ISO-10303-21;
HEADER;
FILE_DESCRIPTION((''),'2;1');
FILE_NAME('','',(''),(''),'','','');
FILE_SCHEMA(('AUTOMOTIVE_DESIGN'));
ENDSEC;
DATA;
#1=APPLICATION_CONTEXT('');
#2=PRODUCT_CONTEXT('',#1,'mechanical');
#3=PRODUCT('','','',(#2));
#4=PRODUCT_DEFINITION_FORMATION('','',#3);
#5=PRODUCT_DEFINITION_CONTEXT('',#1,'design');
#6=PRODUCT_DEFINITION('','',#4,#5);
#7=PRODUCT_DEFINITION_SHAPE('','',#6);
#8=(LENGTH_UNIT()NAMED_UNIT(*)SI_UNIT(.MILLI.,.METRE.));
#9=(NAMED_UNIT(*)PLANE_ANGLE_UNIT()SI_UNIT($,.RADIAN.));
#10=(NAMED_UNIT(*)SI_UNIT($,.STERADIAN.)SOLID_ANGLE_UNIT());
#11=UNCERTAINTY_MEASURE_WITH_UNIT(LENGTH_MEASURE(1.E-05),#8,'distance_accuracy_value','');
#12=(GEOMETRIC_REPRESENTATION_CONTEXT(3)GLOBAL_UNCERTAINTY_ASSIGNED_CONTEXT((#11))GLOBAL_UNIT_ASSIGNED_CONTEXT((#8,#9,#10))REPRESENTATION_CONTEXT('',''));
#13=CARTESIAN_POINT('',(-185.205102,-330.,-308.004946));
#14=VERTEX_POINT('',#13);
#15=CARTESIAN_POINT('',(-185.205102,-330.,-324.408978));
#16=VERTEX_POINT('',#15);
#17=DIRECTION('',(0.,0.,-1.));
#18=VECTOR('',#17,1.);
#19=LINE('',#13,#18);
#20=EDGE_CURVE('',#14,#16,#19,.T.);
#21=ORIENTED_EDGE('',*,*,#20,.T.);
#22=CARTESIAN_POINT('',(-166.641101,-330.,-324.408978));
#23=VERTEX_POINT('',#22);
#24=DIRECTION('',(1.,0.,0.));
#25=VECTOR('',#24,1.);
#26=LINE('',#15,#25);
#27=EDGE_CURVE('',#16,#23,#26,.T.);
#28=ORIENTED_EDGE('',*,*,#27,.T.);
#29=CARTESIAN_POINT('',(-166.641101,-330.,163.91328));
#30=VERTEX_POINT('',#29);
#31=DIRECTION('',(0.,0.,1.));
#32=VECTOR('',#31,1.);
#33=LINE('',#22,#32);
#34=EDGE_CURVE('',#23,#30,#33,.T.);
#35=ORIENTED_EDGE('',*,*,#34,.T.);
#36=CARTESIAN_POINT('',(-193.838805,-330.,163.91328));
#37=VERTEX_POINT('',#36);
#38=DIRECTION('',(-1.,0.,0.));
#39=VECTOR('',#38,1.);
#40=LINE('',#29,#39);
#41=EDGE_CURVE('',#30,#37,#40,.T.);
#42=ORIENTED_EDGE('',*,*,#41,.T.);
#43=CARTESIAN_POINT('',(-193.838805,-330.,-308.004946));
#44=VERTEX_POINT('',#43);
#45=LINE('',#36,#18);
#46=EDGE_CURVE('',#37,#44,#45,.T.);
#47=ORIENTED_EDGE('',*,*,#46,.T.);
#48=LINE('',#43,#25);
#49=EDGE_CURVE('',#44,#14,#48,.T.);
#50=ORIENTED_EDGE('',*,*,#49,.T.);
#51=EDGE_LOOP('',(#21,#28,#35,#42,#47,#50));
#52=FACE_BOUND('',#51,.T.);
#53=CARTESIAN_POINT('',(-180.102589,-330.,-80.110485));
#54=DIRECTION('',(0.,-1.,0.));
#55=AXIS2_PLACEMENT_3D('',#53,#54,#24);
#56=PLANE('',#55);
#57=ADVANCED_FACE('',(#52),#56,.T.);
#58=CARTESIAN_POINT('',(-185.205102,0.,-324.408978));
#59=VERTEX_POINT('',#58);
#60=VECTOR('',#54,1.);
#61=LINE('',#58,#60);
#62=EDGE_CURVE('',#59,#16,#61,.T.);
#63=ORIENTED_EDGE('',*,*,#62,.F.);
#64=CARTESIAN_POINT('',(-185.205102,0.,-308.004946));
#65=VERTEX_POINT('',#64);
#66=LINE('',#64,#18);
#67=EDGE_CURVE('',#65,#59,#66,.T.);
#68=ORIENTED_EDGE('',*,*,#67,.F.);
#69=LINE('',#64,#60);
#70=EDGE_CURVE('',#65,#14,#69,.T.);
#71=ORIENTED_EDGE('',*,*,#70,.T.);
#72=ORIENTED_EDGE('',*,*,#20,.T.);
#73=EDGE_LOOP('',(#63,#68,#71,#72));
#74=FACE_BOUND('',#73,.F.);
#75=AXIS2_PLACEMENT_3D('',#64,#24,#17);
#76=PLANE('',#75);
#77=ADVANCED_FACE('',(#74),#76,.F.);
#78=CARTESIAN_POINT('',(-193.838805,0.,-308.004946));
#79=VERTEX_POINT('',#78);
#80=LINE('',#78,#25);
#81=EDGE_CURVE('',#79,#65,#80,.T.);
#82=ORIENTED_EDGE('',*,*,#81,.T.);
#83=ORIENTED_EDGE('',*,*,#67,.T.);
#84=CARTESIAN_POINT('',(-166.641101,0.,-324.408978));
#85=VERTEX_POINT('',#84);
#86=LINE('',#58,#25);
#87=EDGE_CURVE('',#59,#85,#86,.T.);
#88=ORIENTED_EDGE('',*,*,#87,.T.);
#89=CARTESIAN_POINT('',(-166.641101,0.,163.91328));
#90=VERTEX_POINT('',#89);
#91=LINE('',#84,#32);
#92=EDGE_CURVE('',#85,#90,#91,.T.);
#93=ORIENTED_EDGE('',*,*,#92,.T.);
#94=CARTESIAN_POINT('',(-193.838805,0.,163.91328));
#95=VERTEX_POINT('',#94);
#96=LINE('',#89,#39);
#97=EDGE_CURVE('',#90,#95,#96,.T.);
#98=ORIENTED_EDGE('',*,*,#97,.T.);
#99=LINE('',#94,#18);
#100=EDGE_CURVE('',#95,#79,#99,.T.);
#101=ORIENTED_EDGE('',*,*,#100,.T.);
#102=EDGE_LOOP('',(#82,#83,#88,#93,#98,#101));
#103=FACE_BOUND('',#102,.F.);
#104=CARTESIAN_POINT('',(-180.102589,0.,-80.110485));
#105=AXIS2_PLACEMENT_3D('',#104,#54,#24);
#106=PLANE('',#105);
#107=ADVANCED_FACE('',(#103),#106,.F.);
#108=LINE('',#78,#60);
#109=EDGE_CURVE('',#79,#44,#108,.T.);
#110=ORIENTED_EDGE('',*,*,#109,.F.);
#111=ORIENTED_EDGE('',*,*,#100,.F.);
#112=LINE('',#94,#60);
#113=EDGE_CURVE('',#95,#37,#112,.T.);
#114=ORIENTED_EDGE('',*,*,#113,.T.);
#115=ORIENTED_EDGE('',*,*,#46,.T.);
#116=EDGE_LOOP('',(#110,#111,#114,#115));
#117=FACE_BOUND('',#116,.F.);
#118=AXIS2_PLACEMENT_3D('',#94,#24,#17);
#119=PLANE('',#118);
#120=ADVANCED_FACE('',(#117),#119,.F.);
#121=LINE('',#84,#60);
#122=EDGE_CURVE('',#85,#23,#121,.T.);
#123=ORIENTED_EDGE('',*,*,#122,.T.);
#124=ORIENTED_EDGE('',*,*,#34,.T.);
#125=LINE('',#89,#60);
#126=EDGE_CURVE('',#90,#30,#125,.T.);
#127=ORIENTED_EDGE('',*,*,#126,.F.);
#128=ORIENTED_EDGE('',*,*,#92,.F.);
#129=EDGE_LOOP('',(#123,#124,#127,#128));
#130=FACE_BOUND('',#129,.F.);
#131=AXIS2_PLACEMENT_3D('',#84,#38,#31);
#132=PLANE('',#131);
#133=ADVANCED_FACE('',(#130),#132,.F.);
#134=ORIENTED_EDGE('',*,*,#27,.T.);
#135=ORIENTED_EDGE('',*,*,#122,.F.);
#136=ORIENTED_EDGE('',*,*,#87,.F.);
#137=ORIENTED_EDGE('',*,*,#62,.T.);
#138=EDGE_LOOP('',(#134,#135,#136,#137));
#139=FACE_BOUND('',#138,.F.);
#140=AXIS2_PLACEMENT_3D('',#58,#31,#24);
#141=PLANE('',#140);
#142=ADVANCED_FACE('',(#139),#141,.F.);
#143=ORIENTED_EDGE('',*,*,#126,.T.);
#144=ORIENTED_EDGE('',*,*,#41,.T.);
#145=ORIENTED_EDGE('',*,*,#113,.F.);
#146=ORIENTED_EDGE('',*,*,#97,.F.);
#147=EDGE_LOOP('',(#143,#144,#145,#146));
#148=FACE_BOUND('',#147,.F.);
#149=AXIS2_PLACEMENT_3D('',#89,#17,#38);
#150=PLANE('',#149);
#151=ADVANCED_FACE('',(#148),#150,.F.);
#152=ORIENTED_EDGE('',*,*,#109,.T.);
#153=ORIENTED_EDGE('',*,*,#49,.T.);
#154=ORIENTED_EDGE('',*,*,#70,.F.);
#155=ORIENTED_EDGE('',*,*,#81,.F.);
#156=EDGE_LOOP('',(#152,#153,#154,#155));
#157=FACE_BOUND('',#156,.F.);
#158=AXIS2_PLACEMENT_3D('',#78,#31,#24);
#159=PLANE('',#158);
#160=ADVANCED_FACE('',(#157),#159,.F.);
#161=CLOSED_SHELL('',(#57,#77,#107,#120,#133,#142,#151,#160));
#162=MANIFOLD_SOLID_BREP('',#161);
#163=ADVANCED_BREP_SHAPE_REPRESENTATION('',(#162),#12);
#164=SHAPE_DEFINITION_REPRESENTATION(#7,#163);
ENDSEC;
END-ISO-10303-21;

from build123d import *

# Parameters (mm, degrees)
F2_DEPTH = 330


# Not quite as in the source:
# - a feature of the source that left no trace in its solid (it failed there, or was rolled back) is left out


with BuildPart() as f2:
    # F0 (on Front) → F2 (new body)
    with BuildSketch(Plane.XZ):
        Polygon((-166.6411012411, 147.3953723907), (-166.6411012411, 163.9132797718), (-193.8388049603, 163.9132797718), (-193.8388049603, -308.0049455166), (-185.2051019669, -308.0049455166), (-185.2051019669, -324.4089782238), (-166.6411012411, -324.4089782238), align=None)
    extrude(amount=F2_DEPTH)


solid = f2.part
